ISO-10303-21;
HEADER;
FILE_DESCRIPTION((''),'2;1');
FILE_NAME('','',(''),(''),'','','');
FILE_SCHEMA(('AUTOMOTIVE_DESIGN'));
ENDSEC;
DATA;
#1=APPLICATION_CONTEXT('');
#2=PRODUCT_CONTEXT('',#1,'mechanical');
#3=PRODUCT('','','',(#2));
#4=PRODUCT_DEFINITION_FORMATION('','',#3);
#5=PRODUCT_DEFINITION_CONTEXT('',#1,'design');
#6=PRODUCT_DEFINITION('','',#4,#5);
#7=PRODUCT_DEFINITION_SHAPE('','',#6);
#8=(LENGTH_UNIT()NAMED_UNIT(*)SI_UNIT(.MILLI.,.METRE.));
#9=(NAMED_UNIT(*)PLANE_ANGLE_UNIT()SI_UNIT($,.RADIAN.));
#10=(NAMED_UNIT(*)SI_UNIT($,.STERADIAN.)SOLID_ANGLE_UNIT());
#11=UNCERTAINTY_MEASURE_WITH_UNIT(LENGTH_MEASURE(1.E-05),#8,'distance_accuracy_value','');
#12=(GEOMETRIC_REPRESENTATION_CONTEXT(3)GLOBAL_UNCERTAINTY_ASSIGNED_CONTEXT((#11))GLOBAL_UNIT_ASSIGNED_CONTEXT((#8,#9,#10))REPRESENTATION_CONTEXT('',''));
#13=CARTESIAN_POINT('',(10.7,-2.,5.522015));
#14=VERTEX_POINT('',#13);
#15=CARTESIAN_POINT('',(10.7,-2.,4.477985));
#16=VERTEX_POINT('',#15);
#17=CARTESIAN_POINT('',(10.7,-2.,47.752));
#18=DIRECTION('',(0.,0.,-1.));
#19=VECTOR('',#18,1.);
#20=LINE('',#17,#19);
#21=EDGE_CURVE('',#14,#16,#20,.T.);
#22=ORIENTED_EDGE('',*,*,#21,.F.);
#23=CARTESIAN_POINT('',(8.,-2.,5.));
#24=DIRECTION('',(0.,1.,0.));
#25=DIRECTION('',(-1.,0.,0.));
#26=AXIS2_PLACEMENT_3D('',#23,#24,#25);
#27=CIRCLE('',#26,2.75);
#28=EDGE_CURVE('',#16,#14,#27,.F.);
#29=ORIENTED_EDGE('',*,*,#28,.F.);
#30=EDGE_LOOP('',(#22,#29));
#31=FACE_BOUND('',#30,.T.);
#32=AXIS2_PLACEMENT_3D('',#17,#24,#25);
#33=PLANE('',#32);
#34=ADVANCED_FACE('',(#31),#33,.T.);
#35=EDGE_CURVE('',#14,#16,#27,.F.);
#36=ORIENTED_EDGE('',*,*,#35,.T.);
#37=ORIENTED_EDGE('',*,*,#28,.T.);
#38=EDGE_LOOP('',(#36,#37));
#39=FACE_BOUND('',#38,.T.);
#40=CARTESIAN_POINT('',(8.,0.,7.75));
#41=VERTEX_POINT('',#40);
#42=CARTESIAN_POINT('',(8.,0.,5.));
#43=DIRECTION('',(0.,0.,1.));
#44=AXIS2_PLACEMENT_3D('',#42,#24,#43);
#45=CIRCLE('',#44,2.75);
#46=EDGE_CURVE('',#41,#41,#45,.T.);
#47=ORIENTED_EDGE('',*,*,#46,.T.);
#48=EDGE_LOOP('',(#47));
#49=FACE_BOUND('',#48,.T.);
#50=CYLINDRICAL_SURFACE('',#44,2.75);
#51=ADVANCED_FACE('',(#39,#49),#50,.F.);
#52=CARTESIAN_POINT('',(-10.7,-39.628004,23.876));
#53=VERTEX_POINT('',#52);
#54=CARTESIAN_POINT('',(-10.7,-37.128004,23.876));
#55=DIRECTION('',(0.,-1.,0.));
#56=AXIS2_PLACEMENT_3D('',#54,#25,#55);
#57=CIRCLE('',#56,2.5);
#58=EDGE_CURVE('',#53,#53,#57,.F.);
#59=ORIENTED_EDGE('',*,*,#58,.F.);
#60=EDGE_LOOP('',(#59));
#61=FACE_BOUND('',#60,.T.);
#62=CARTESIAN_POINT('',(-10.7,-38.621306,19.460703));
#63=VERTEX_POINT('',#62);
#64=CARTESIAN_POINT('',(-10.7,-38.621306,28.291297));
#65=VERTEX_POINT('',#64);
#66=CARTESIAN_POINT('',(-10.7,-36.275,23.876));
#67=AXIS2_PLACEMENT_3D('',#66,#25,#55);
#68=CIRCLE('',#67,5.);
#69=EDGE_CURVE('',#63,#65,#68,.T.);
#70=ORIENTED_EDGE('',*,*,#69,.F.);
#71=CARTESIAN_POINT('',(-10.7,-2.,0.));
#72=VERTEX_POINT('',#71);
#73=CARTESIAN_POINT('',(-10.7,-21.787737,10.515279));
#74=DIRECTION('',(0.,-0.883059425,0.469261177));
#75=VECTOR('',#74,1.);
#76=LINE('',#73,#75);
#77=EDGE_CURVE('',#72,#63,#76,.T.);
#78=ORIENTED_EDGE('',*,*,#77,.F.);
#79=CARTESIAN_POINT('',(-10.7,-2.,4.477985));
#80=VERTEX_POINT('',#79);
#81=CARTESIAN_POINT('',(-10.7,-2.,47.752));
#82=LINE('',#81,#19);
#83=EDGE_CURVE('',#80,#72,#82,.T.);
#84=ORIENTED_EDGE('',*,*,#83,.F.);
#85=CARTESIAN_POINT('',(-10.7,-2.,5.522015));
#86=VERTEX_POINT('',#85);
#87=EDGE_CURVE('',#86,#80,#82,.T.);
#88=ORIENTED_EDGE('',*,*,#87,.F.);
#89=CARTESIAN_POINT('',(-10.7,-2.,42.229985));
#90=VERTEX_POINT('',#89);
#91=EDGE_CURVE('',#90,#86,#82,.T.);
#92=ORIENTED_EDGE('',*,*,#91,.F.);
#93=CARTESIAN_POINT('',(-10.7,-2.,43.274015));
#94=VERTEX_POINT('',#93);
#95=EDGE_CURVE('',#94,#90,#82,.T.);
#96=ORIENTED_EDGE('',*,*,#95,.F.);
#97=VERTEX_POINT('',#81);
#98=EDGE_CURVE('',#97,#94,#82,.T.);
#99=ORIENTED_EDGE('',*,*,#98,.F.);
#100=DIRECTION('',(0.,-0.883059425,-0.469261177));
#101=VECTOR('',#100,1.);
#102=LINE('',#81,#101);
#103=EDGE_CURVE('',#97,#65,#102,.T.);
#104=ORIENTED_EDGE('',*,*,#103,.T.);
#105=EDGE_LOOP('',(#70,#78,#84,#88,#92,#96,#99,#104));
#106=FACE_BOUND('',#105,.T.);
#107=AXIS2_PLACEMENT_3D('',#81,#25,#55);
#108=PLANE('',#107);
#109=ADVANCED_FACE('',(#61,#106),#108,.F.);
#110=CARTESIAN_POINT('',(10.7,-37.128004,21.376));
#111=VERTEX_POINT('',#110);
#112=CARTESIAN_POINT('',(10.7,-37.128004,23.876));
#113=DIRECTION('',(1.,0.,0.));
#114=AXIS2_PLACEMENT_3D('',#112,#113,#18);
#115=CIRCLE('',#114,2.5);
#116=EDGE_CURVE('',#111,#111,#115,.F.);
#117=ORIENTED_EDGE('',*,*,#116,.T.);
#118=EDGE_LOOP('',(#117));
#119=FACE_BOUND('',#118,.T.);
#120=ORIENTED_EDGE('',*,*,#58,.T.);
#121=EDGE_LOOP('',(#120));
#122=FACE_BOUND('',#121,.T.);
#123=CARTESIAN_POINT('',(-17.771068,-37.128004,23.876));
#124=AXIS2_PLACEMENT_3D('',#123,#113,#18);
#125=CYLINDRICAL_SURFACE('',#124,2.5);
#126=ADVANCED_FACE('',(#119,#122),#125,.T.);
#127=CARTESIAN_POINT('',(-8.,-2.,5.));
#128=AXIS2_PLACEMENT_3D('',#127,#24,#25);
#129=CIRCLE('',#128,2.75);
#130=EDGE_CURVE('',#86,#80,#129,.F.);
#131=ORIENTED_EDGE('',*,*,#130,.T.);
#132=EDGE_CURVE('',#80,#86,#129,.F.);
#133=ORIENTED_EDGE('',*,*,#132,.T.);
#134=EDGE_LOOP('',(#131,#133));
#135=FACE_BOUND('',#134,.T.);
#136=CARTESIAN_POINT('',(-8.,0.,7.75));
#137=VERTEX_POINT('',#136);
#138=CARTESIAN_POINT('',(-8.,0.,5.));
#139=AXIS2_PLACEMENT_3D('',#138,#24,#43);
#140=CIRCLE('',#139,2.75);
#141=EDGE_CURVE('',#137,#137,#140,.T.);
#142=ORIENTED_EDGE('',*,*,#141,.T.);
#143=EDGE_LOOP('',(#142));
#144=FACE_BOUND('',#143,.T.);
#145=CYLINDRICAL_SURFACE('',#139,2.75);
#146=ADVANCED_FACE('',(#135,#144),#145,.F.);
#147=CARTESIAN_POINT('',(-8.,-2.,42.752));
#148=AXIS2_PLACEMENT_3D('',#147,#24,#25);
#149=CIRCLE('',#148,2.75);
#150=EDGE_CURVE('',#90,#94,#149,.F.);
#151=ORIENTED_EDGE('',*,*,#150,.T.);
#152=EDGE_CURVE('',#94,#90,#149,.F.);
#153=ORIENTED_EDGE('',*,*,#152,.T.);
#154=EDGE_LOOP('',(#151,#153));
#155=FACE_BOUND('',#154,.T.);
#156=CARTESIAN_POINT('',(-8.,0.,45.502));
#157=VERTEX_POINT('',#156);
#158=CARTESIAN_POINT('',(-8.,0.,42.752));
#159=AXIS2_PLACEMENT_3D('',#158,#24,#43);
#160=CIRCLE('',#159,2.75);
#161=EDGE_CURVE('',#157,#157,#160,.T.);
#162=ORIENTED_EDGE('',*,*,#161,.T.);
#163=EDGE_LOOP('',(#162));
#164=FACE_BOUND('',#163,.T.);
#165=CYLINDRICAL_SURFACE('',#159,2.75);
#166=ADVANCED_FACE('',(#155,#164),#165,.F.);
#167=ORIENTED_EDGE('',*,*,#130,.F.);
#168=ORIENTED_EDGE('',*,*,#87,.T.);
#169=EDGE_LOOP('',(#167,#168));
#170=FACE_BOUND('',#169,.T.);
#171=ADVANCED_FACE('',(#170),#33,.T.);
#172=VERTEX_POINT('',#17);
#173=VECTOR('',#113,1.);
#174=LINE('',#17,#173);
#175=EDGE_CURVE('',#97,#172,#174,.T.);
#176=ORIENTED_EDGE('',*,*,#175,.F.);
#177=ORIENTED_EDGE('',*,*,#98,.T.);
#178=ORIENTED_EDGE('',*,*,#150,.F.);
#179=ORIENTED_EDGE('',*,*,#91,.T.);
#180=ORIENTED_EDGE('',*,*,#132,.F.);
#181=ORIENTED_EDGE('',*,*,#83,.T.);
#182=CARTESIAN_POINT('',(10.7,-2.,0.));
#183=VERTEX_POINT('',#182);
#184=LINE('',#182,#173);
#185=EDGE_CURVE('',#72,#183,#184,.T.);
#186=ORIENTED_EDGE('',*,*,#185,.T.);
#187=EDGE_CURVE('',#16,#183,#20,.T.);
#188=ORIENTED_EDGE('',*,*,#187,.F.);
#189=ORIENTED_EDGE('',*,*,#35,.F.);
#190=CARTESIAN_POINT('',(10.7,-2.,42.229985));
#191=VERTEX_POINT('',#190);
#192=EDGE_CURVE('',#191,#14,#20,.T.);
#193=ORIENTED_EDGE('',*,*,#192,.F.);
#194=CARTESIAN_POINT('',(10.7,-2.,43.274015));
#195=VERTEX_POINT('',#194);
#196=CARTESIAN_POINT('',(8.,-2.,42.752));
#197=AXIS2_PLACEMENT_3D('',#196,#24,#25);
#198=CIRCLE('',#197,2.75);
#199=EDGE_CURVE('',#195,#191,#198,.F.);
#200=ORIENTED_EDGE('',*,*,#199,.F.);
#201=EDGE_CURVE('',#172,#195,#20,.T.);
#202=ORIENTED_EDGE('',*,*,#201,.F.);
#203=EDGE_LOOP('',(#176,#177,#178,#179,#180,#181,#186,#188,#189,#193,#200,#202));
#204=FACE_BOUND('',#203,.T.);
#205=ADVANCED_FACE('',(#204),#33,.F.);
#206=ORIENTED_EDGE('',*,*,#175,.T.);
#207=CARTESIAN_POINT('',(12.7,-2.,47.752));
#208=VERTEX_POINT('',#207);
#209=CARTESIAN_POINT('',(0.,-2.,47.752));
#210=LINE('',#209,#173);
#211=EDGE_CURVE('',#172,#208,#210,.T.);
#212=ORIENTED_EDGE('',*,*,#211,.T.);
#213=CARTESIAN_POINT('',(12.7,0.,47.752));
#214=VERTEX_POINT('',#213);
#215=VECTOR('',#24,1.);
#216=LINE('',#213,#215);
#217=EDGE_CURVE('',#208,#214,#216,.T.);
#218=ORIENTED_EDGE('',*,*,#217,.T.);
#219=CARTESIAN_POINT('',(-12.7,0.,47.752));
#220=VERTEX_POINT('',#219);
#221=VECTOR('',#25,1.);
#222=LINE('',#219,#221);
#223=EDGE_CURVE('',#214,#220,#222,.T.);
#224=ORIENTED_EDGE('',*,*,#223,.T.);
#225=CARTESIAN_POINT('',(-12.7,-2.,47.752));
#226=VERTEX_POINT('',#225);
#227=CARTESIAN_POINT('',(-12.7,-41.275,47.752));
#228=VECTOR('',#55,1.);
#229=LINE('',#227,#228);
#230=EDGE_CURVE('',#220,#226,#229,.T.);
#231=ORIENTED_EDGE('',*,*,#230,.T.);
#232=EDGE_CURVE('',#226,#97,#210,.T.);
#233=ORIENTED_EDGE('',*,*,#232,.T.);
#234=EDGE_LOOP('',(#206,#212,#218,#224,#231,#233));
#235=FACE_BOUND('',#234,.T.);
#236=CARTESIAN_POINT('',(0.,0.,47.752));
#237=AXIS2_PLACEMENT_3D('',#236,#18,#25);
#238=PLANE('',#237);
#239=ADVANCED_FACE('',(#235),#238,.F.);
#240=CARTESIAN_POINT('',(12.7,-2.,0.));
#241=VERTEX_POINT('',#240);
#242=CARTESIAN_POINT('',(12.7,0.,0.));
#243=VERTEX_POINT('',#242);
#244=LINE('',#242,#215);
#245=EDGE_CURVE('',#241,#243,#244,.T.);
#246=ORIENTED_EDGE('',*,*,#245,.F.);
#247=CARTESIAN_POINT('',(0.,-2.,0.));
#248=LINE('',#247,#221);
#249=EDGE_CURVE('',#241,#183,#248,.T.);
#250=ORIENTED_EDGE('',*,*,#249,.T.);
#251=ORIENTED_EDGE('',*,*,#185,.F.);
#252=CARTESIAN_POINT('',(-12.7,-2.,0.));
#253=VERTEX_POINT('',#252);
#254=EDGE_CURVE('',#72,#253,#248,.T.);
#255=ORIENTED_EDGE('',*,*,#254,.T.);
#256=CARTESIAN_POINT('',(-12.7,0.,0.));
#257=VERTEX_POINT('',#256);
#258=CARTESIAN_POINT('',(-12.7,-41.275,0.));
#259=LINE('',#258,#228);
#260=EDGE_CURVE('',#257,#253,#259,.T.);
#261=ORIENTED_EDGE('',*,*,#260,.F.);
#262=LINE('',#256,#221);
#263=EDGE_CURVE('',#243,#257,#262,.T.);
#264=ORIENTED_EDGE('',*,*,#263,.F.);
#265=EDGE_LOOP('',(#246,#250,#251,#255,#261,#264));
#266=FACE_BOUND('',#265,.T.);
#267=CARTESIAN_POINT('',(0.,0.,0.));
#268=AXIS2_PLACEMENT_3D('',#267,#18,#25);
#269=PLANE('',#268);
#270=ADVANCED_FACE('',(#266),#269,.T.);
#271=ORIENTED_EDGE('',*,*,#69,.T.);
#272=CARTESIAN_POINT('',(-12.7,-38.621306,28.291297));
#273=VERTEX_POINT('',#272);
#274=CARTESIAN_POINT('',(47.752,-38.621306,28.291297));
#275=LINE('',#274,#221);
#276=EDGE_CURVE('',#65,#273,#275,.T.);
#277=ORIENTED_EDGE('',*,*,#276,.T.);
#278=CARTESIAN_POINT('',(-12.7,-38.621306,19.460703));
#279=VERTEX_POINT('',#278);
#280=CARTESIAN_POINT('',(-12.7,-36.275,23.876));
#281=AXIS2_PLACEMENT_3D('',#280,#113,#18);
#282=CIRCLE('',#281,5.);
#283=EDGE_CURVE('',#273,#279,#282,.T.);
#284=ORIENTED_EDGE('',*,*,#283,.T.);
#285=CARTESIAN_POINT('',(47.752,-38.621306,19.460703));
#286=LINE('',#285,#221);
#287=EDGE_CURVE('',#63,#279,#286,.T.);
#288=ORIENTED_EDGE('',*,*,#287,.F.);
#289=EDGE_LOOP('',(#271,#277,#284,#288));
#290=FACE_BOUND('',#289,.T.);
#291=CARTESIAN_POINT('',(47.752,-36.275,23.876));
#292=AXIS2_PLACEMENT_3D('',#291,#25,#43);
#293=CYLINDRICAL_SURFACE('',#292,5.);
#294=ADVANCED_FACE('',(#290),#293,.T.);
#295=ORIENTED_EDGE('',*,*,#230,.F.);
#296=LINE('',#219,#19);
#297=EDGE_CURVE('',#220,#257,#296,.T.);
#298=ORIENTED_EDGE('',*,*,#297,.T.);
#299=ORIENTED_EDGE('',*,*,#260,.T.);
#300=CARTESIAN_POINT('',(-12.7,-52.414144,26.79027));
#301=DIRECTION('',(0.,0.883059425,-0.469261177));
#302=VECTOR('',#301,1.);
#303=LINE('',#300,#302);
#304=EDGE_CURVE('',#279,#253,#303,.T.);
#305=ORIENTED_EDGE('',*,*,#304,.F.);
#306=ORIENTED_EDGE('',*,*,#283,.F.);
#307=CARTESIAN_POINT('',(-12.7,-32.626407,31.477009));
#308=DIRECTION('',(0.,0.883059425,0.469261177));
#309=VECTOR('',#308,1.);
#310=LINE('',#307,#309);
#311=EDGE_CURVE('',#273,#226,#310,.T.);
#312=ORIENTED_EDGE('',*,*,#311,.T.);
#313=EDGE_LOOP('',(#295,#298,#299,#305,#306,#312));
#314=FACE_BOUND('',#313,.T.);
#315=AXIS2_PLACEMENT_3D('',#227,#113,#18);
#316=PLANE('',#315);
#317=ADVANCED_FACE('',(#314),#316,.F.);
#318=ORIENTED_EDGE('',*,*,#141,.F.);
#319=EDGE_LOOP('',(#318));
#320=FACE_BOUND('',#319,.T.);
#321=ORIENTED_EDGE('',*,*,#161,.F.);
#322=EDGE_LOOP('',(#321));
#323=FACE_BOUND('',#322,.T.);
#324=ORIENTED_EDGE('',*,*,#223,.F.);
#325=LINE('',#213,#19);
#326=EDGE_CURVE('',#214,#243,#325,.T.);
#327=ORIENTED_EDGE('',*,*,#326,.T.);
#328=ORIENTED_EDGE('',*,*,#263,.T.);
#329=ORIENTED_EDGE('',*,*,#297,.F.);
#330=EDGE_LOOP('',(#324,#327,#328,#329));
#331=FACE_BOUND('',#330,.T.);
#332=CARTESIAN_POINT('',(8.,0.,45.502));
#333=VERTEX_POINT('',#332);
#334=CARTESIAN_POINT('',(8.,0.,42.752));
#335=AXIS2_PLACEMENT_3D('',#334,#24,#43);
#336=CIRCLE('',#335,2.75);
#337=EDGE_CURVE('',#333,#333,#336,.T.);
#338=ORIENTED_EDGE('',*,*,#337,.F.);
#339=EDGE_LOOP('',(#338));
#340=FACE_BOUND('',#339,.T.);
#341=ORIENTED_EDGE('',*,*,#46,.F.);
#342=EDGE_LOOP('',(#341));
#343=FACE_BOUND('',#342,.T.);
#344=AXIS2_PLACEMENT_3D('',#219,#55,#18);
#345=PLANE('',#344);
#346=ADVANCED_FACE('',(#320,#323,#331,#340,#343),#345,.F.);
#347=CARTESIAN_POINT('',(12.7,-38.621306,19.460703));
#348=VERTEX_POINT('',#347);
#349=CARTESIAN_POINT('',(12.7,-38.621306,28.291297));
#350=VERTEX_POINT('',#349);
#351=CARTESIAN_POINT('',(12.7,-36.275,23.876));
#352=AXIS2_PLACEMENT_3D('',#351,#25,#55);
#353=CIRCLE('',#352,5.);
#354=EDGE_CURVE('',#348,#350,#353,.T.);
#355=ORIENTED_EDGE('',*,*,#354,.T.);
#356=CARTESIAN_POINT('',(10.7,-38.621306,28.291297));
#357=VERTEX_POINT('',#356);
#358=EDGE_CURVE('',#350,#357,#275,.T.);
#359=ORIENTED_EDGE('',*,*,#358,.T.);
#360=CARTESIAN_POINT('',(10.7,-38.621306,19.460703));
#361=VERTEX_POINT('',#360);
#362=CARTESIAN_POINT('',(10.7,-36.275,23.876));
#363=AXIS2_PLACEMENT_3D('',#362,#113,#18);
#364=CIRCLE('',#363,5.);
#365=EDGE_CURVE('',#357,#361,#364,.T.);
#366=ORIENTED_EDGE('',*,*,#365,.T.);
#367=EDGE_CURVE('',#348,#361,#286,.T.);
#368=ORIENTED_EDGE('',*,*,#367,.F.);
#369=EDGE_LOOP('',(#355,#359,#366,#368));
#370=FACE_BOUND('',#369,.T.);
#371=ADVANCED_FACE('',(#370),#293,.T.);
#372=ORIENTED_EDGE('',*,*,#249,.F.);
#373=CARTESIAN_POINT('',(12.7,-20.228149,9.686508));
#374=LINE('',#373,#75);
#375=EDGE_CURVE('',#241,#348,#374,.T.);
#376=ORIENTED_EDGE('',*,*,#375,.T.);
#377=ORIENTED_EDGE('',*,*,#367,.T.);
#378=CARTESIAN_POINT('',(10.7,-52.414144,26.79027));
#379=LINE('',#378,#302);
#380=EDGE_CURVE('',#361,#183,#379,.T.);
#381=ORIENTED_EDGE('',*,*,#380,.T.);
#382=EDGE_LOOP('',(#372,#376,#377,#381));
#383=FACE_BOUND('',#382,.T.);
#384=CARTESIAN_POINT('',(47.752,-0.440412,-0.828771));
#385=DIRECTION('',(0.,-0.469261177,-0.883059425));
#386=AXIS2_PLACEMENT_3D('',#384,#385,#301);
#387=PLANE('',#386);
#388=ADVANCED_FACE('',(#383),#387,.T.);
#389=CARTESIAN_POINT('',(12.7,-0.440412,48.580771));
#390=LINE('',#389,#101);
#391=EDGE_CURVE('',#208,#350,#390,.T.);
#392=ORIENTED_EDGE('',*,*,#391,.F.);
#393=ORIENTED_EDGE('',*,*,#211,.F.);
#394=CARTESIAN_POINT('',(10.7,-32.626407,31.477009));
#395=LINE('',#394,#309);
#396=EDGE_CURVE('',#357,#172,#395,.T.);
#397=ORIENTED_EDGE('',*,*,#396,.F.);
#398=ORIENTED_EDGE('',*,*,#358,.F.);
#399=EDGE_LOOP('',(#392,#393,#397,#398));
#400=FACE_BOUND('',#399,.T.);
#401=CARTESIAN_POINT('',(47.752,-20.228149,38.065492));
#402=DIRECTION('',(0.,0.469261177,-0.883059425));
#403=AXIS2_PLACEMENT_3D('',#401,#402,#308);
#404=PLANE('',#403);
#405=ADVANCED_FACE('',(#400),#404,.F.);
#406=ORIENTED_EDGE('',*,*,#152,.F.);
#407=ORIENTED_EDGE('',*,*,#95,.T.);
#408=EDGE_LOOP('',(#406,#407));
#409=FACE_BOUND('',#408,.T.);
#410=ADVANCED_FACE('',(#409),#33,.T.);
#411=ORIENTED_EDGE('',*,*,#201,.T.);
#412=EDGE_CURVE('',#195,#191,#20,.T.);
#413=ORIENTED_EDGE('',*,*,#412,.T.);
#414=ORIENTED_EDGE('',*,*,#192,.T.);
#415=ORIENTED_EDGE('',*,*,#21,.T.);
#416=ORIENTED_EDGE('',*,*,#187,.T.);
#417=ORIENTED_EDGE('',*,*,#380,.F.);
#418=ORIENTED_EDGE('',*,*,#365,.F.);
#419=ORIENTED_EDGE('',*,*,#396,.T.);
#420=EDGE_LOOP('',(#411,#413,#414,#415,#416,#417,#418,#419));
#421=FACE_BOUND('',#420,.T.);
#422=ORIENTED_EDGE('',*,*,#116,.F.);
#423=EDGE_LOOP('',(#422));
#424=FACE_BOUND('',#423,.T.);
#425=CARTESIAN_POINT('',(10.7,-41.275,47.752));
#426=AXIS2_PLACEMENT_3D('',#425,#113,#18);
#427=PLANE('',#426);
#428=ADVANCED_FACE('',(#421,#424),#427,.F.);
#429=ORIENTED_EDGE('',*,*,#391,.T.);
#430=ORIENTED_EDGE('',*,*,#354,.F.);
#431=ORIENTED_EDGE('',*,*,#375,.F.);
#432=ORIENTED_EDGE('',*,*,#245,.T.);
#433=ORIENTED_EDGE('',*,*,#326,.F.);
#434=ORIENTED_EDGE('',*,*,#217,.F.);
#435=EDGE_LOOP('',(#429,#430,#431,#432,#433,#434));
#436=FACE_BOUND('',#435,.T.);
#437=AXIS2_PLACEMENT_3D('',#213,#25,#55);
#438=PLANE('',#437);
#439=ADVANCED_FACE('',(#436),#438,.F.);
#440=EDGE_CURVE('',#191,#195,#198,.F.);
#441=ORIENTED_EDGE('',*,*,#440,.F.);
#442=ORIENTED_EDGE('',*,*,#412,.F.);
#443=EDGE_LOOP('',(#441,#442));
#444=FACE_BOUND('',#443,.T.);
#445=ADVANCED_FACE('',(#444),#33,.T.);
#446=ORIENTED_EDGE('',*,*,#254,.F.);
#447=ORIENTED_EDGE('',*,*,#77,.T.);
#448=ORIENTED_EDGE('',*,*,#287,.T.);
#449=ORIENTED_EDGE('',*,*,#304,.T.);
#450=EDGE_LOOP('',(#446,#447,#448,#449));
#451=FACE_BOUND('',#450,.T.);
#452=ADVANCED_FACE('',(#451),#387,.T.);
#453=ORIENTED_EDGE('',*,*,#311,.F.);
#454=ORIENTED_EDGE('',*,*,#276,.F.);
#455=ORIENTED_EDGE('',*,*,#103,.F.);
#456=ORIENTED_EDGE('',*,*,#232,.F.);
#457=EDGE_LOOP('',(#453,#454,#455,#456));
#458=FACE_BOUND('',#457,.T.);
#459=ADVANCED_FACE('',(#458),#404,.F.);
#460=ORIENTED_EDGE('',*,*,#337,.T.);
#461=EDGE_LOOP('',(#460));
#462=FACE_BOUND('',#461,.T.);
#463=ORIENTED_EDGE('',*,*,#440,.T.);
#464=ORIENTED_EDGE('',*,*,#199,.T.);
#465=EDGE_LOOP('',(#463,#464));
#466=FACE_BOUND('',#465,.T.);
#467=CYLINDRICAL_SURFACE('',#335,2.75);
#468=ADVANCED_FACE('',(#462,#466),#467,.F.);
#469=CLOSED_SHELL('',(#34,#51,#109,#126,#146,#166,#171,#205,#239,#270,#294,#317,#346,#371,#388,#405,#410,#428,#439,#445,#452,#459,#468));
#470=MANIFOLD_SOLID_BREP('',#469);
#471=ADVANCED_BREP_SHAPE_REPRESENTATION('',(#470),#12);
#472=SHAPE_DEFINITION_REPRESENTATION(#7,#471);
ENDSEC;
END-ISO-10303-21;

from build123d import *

# Parameters (mm, degrees)
BOSS_EXTRUDE1_DEPTH          = 47.752
CUT_EXTRUDE1_DEPTH           = 47.752
CUT_EXTRUDE1_DEPTH_BACK      = 47.752
BOSS_EXTRUDE6_START          = -10.7
SKETCH3_R                    = 2.5
BOSS_EXTRUDE6_DEPTH          = 10.7
SKETCH3_2_R                  = 2.5
BOSS_EXTRUDE7_DEPTH          = 10.7
M5_START                     = -2
M5_CLEARANCE_HOLE1_OUTLINE_R = 2.75
M5_CLEARANCE_HOLE1_DEPTH     = 2


# Read off the part's stored shape, not the designer's step: M5 Clearance Hole1
with BuildPart() as part:
    # Sketch1 → Boss-Extrude1 (new body)
    with BuildSketch(Plane.XY):
        Polygon((-12.7, -41.275), (-12.7, 0), (12.7, 0), (12.7, -41.275), (10.7, -41.275), (10.7, -2), (-10.7, -2), (-10.7, -41.275), align=None)
    extrude(amount=BOSS_EXTRUDE1_DEPTH)

    # Sketch2 → Cut-Extrude1 (cut, two sides: drawn at the far end of the back side and taken through both)
    with BuildSketch(Plane(origin=(0, 0, 0), x_dir=(0, 0, -1), z_dir=(1, 0, 0)).offset(-CUT_EXTRUDE1_DEPTH_BACK)):
        with BuildLine():
            Line((-23.876, -42.10871549), (-23.876, -41.275))
            ThreePointArc((-23.876, -41.275), (-26.451700932, -40.560529688), (-28.291297125, -38.621305883))
            Line((-28.291297125, -38.621305883), (-47.752, -2))
            Line((-47.752, -2), (-47.752, -42.10871549))
            Line((-47.752, -42.10871549), (-23.876, -42.10871549))
        make_face()
        with BuildLine():
            Line((0, -42.10871549), (0, -2))
            Line((0, -2), (-19.460702875, -38.621305883))
            ThreePointArc((-19.460702875, -38.621305883), (-21.300299068, -40.560529688), (-23.876, -41.275))
            Line((-23.876, -41.275), (-23.876, -42.10871549))
            Line((-23.876, -42.10871549), (0, -42.10871549))
        make_face()
    extrude(amount=CUT_EXTRUDE1_DEPTH + CUT_EXTRUDE1_DEPTH_BACK, mode=Mode.SUBTRACT)

    # Sketch3 → Boss-Extrude6 (add)
    with BuildSketch(Plane(origin=(0, 0, 0), x_dir=(0, 0, -1), z_dir=(1, 0, 0)).offset(BOSS_EXTRUDE6_START)):
        with Locations((-23.876, -37.128004449)):
            Circle(SKETCH3_R)
    extrude(amount=BOSS_EXTRUDE6_DEPTH)

    # Sketch3<2> → Boss-Extrude7 (add)
    with BuildSketch(Plane(origin=(0, 0, 0), x_dir=(0, 0, -1), z_dir=(1, 0, 0))):
        with Locations((-23.876, -37.128004449)):
            Circle(SKETCH3_2_R)
    extrude(amount=BOSS_EXTRUDE7_DEPTH)

    # M5 Clearance Hole1 outline → M5 Clearance Hole1 (cut)
    with BuildSketch(Plane(origin=(0, 0, 0), x_dir=(1, 0, 0), z_dir=(0, 1, 0)).offset(M5_START)):
        with Locations((8, -5)):
            Circle(M5_CLEARANCE_HOLE1_OUTLINE_R)
        with Locations((8, -42.752)):
            Circle(M5_CLEARANCE_HOLE1_OUTLINE_R)
        with Locations((-8, -42.752)):
            Circle(M5_CLEARANCE_HOLE1_OUTLINE_R)
        with Locations((-8, -5)):
            Circle(M5_CLEARANCE_HOLE1_OUTLINE_R)
    extrude(amount=M5_CLEARANCE_HOLE1_DEPTH, mode=Mode.SUBTRACT)


solid = part.part
